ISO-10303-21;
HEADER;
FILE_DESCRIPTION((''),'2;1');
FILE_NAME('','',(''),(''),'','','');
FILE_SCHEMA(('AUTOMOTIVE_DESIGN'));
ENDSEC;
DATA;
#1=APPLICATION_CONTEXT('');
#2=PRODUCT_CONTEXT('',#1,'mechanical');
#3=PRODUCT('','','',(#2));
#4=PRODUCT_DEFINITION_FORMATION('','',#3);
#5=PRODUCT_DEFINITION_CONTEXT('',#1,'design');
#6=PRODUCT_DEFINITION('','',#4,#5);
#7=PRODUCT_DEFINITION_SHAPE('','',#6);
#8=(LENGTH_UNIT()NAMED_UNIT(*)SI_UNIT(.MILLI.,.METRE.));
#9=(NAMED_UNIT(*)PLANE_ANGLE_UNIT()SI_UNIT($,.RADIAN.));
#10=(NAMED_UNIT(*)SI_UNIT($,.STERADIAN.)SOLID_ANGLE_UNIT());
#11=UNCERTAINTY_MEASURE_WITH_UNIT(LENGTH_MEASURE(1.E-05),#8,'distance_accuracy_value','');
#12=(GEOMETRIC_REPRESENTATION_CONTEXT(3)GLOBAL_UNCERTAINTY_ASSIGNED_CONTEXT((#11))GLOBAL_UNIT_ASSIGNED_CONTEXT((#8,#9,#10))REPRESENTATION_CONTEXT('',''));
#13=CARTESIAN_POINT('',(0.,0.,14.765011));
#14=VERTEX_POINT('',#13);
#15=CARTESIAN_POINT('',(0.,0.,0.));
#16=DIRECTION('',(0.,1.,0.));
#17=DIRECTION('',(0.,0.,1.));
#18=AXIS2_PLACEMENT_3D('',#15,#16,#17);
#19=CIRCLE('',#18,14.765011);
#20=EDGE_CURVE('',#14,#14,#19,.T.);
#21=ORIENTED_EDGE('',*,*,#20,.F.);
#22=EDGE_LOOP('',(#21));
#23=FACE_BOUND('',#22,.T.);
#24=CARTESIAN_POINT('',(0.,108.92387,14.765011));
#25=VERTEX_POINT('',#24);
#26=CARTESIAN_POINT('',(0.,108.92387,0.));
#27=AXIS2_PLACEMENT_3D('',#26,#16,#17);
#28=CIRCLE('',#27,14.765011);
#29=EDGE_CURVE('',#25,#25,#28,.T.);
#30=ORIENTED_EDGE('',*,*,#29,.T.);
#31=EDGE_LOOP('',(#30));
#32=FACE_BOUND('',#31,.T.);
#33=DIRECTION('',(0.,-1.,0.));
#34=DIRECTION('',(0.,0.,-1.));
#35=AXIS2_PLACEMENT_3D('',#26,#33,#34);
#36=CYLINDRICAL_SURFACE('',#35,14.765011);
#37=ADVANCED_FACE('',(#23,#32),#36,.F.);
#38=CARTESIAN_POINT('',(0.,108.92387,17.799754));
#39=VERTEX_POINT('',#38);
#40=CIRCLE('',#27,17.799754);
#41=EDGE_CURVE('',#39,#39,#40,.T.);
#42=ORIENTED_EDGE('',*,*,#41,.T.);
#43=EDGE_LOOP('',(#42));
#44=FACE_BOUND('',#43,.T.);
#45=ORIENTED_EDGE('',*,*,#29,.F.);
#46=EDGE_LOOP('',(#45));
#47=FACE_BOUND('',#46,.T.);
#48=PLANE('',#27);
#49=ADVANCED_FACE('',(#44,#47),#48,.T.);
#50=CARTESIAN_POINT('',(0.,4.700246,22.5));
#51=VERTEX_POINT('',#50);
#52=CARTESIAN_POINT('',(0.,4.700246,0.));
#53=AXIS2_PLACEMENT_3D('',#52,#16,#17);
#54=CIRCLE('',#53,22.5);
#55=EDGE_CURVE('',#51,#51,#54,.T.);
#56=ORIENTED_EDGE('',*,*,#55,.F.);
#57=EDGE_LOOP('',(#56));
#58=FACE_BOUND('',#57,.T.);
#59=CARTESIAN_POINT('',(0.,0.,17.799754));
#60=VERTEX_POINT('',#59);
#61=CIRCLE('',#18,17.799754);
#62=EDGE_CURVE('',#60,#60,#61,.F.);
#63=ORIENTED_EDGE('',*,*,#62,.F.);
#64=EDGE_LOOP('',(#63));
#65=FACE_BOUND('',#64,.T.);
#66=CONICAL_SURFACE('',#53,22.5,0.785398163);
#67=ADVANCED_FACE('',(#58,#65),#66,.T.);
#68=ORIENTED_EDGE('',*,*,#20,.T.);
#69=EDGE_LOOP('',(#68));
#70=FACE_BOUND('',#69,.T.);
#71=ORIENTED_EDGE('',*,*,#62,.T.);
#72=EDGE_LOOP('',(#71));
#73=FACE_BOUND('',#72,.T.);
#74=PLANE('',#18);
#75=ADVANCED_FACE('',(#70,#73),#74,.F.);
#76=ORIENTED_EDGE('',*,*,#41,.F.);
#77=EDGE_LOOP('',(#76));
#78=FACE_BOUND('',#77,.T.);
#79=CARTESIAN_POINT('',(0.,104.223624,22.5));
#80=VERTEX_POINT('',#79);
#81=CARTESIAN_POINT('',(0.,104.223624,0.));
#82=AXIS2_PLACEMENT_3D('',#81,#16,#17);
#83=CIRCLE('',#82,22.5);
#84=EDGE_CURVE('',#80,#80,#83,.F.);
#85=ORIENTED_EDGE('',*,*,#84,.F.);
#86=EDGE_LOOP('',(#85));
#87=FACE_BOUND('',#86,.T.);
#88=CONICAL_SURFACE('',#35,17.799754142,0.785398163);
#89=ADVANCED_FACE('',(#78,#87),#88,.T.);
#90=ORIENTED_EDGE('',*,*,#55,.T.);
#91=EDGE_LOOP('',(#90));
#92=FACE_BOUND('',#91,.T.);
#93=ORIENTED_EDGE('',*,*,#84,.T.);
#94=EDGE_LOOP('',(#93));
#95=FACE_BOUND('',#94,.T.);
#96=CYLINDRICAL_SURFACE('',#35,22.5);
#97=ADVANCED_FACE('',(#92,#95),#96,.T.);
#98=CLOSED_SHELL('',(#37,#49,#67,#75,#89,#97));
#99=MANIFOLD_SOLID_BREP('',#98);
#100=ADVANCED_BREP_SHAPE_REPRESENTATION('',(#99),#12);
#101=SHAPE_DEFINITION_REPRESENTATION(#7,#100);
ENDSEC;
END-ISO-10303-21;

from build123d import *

# Parameters (mm, degrees)
SKETCH1_R           = 22.5
BOSS_EXTRUDE1_DEPTH = 108.923869523
SKETCH2_R           = 14.765011188
CUT_EXTRUDE1_DEPTH  = 114.476470477
CHAMFER1_SIZE       = 4.700245858


with BuildPart() as part:
    # Sketch1 → Boss-Extrude1 (new body)
    with BuildSketch(Plane(origin=(0, 0, 0), x_dir=(1, 0, 0), z_dir=(0, 1, 0))):
        Circle(SKETCH1_R)
    extrude(amount=BOSS_EXTRUDE1_DEPTH)

    # Sketch2 → Cut-Extrude1 (cut, through all)
    with BuildSketch(Plane(origin=(0, 0, 0), x_dir=(1, 0, 0), z_dir=(0, 1, 0))):
        Circle(SKETCH2_R)
    extrude(amount=CUT_EXTRUDE1_DEPTH, mode=Mode.SUBTRACT)

    # Chamfer1
    chamfer1_edges = [part.edges().sort_by_distance(p)[0] for p in [
        (-22.5, 108.923869523, 0),
        (-22.5, 0, 0),
    ]]
    chamfer(chamfer1_edges, length=CHAMFER1_SIZE)


solid = part.part
